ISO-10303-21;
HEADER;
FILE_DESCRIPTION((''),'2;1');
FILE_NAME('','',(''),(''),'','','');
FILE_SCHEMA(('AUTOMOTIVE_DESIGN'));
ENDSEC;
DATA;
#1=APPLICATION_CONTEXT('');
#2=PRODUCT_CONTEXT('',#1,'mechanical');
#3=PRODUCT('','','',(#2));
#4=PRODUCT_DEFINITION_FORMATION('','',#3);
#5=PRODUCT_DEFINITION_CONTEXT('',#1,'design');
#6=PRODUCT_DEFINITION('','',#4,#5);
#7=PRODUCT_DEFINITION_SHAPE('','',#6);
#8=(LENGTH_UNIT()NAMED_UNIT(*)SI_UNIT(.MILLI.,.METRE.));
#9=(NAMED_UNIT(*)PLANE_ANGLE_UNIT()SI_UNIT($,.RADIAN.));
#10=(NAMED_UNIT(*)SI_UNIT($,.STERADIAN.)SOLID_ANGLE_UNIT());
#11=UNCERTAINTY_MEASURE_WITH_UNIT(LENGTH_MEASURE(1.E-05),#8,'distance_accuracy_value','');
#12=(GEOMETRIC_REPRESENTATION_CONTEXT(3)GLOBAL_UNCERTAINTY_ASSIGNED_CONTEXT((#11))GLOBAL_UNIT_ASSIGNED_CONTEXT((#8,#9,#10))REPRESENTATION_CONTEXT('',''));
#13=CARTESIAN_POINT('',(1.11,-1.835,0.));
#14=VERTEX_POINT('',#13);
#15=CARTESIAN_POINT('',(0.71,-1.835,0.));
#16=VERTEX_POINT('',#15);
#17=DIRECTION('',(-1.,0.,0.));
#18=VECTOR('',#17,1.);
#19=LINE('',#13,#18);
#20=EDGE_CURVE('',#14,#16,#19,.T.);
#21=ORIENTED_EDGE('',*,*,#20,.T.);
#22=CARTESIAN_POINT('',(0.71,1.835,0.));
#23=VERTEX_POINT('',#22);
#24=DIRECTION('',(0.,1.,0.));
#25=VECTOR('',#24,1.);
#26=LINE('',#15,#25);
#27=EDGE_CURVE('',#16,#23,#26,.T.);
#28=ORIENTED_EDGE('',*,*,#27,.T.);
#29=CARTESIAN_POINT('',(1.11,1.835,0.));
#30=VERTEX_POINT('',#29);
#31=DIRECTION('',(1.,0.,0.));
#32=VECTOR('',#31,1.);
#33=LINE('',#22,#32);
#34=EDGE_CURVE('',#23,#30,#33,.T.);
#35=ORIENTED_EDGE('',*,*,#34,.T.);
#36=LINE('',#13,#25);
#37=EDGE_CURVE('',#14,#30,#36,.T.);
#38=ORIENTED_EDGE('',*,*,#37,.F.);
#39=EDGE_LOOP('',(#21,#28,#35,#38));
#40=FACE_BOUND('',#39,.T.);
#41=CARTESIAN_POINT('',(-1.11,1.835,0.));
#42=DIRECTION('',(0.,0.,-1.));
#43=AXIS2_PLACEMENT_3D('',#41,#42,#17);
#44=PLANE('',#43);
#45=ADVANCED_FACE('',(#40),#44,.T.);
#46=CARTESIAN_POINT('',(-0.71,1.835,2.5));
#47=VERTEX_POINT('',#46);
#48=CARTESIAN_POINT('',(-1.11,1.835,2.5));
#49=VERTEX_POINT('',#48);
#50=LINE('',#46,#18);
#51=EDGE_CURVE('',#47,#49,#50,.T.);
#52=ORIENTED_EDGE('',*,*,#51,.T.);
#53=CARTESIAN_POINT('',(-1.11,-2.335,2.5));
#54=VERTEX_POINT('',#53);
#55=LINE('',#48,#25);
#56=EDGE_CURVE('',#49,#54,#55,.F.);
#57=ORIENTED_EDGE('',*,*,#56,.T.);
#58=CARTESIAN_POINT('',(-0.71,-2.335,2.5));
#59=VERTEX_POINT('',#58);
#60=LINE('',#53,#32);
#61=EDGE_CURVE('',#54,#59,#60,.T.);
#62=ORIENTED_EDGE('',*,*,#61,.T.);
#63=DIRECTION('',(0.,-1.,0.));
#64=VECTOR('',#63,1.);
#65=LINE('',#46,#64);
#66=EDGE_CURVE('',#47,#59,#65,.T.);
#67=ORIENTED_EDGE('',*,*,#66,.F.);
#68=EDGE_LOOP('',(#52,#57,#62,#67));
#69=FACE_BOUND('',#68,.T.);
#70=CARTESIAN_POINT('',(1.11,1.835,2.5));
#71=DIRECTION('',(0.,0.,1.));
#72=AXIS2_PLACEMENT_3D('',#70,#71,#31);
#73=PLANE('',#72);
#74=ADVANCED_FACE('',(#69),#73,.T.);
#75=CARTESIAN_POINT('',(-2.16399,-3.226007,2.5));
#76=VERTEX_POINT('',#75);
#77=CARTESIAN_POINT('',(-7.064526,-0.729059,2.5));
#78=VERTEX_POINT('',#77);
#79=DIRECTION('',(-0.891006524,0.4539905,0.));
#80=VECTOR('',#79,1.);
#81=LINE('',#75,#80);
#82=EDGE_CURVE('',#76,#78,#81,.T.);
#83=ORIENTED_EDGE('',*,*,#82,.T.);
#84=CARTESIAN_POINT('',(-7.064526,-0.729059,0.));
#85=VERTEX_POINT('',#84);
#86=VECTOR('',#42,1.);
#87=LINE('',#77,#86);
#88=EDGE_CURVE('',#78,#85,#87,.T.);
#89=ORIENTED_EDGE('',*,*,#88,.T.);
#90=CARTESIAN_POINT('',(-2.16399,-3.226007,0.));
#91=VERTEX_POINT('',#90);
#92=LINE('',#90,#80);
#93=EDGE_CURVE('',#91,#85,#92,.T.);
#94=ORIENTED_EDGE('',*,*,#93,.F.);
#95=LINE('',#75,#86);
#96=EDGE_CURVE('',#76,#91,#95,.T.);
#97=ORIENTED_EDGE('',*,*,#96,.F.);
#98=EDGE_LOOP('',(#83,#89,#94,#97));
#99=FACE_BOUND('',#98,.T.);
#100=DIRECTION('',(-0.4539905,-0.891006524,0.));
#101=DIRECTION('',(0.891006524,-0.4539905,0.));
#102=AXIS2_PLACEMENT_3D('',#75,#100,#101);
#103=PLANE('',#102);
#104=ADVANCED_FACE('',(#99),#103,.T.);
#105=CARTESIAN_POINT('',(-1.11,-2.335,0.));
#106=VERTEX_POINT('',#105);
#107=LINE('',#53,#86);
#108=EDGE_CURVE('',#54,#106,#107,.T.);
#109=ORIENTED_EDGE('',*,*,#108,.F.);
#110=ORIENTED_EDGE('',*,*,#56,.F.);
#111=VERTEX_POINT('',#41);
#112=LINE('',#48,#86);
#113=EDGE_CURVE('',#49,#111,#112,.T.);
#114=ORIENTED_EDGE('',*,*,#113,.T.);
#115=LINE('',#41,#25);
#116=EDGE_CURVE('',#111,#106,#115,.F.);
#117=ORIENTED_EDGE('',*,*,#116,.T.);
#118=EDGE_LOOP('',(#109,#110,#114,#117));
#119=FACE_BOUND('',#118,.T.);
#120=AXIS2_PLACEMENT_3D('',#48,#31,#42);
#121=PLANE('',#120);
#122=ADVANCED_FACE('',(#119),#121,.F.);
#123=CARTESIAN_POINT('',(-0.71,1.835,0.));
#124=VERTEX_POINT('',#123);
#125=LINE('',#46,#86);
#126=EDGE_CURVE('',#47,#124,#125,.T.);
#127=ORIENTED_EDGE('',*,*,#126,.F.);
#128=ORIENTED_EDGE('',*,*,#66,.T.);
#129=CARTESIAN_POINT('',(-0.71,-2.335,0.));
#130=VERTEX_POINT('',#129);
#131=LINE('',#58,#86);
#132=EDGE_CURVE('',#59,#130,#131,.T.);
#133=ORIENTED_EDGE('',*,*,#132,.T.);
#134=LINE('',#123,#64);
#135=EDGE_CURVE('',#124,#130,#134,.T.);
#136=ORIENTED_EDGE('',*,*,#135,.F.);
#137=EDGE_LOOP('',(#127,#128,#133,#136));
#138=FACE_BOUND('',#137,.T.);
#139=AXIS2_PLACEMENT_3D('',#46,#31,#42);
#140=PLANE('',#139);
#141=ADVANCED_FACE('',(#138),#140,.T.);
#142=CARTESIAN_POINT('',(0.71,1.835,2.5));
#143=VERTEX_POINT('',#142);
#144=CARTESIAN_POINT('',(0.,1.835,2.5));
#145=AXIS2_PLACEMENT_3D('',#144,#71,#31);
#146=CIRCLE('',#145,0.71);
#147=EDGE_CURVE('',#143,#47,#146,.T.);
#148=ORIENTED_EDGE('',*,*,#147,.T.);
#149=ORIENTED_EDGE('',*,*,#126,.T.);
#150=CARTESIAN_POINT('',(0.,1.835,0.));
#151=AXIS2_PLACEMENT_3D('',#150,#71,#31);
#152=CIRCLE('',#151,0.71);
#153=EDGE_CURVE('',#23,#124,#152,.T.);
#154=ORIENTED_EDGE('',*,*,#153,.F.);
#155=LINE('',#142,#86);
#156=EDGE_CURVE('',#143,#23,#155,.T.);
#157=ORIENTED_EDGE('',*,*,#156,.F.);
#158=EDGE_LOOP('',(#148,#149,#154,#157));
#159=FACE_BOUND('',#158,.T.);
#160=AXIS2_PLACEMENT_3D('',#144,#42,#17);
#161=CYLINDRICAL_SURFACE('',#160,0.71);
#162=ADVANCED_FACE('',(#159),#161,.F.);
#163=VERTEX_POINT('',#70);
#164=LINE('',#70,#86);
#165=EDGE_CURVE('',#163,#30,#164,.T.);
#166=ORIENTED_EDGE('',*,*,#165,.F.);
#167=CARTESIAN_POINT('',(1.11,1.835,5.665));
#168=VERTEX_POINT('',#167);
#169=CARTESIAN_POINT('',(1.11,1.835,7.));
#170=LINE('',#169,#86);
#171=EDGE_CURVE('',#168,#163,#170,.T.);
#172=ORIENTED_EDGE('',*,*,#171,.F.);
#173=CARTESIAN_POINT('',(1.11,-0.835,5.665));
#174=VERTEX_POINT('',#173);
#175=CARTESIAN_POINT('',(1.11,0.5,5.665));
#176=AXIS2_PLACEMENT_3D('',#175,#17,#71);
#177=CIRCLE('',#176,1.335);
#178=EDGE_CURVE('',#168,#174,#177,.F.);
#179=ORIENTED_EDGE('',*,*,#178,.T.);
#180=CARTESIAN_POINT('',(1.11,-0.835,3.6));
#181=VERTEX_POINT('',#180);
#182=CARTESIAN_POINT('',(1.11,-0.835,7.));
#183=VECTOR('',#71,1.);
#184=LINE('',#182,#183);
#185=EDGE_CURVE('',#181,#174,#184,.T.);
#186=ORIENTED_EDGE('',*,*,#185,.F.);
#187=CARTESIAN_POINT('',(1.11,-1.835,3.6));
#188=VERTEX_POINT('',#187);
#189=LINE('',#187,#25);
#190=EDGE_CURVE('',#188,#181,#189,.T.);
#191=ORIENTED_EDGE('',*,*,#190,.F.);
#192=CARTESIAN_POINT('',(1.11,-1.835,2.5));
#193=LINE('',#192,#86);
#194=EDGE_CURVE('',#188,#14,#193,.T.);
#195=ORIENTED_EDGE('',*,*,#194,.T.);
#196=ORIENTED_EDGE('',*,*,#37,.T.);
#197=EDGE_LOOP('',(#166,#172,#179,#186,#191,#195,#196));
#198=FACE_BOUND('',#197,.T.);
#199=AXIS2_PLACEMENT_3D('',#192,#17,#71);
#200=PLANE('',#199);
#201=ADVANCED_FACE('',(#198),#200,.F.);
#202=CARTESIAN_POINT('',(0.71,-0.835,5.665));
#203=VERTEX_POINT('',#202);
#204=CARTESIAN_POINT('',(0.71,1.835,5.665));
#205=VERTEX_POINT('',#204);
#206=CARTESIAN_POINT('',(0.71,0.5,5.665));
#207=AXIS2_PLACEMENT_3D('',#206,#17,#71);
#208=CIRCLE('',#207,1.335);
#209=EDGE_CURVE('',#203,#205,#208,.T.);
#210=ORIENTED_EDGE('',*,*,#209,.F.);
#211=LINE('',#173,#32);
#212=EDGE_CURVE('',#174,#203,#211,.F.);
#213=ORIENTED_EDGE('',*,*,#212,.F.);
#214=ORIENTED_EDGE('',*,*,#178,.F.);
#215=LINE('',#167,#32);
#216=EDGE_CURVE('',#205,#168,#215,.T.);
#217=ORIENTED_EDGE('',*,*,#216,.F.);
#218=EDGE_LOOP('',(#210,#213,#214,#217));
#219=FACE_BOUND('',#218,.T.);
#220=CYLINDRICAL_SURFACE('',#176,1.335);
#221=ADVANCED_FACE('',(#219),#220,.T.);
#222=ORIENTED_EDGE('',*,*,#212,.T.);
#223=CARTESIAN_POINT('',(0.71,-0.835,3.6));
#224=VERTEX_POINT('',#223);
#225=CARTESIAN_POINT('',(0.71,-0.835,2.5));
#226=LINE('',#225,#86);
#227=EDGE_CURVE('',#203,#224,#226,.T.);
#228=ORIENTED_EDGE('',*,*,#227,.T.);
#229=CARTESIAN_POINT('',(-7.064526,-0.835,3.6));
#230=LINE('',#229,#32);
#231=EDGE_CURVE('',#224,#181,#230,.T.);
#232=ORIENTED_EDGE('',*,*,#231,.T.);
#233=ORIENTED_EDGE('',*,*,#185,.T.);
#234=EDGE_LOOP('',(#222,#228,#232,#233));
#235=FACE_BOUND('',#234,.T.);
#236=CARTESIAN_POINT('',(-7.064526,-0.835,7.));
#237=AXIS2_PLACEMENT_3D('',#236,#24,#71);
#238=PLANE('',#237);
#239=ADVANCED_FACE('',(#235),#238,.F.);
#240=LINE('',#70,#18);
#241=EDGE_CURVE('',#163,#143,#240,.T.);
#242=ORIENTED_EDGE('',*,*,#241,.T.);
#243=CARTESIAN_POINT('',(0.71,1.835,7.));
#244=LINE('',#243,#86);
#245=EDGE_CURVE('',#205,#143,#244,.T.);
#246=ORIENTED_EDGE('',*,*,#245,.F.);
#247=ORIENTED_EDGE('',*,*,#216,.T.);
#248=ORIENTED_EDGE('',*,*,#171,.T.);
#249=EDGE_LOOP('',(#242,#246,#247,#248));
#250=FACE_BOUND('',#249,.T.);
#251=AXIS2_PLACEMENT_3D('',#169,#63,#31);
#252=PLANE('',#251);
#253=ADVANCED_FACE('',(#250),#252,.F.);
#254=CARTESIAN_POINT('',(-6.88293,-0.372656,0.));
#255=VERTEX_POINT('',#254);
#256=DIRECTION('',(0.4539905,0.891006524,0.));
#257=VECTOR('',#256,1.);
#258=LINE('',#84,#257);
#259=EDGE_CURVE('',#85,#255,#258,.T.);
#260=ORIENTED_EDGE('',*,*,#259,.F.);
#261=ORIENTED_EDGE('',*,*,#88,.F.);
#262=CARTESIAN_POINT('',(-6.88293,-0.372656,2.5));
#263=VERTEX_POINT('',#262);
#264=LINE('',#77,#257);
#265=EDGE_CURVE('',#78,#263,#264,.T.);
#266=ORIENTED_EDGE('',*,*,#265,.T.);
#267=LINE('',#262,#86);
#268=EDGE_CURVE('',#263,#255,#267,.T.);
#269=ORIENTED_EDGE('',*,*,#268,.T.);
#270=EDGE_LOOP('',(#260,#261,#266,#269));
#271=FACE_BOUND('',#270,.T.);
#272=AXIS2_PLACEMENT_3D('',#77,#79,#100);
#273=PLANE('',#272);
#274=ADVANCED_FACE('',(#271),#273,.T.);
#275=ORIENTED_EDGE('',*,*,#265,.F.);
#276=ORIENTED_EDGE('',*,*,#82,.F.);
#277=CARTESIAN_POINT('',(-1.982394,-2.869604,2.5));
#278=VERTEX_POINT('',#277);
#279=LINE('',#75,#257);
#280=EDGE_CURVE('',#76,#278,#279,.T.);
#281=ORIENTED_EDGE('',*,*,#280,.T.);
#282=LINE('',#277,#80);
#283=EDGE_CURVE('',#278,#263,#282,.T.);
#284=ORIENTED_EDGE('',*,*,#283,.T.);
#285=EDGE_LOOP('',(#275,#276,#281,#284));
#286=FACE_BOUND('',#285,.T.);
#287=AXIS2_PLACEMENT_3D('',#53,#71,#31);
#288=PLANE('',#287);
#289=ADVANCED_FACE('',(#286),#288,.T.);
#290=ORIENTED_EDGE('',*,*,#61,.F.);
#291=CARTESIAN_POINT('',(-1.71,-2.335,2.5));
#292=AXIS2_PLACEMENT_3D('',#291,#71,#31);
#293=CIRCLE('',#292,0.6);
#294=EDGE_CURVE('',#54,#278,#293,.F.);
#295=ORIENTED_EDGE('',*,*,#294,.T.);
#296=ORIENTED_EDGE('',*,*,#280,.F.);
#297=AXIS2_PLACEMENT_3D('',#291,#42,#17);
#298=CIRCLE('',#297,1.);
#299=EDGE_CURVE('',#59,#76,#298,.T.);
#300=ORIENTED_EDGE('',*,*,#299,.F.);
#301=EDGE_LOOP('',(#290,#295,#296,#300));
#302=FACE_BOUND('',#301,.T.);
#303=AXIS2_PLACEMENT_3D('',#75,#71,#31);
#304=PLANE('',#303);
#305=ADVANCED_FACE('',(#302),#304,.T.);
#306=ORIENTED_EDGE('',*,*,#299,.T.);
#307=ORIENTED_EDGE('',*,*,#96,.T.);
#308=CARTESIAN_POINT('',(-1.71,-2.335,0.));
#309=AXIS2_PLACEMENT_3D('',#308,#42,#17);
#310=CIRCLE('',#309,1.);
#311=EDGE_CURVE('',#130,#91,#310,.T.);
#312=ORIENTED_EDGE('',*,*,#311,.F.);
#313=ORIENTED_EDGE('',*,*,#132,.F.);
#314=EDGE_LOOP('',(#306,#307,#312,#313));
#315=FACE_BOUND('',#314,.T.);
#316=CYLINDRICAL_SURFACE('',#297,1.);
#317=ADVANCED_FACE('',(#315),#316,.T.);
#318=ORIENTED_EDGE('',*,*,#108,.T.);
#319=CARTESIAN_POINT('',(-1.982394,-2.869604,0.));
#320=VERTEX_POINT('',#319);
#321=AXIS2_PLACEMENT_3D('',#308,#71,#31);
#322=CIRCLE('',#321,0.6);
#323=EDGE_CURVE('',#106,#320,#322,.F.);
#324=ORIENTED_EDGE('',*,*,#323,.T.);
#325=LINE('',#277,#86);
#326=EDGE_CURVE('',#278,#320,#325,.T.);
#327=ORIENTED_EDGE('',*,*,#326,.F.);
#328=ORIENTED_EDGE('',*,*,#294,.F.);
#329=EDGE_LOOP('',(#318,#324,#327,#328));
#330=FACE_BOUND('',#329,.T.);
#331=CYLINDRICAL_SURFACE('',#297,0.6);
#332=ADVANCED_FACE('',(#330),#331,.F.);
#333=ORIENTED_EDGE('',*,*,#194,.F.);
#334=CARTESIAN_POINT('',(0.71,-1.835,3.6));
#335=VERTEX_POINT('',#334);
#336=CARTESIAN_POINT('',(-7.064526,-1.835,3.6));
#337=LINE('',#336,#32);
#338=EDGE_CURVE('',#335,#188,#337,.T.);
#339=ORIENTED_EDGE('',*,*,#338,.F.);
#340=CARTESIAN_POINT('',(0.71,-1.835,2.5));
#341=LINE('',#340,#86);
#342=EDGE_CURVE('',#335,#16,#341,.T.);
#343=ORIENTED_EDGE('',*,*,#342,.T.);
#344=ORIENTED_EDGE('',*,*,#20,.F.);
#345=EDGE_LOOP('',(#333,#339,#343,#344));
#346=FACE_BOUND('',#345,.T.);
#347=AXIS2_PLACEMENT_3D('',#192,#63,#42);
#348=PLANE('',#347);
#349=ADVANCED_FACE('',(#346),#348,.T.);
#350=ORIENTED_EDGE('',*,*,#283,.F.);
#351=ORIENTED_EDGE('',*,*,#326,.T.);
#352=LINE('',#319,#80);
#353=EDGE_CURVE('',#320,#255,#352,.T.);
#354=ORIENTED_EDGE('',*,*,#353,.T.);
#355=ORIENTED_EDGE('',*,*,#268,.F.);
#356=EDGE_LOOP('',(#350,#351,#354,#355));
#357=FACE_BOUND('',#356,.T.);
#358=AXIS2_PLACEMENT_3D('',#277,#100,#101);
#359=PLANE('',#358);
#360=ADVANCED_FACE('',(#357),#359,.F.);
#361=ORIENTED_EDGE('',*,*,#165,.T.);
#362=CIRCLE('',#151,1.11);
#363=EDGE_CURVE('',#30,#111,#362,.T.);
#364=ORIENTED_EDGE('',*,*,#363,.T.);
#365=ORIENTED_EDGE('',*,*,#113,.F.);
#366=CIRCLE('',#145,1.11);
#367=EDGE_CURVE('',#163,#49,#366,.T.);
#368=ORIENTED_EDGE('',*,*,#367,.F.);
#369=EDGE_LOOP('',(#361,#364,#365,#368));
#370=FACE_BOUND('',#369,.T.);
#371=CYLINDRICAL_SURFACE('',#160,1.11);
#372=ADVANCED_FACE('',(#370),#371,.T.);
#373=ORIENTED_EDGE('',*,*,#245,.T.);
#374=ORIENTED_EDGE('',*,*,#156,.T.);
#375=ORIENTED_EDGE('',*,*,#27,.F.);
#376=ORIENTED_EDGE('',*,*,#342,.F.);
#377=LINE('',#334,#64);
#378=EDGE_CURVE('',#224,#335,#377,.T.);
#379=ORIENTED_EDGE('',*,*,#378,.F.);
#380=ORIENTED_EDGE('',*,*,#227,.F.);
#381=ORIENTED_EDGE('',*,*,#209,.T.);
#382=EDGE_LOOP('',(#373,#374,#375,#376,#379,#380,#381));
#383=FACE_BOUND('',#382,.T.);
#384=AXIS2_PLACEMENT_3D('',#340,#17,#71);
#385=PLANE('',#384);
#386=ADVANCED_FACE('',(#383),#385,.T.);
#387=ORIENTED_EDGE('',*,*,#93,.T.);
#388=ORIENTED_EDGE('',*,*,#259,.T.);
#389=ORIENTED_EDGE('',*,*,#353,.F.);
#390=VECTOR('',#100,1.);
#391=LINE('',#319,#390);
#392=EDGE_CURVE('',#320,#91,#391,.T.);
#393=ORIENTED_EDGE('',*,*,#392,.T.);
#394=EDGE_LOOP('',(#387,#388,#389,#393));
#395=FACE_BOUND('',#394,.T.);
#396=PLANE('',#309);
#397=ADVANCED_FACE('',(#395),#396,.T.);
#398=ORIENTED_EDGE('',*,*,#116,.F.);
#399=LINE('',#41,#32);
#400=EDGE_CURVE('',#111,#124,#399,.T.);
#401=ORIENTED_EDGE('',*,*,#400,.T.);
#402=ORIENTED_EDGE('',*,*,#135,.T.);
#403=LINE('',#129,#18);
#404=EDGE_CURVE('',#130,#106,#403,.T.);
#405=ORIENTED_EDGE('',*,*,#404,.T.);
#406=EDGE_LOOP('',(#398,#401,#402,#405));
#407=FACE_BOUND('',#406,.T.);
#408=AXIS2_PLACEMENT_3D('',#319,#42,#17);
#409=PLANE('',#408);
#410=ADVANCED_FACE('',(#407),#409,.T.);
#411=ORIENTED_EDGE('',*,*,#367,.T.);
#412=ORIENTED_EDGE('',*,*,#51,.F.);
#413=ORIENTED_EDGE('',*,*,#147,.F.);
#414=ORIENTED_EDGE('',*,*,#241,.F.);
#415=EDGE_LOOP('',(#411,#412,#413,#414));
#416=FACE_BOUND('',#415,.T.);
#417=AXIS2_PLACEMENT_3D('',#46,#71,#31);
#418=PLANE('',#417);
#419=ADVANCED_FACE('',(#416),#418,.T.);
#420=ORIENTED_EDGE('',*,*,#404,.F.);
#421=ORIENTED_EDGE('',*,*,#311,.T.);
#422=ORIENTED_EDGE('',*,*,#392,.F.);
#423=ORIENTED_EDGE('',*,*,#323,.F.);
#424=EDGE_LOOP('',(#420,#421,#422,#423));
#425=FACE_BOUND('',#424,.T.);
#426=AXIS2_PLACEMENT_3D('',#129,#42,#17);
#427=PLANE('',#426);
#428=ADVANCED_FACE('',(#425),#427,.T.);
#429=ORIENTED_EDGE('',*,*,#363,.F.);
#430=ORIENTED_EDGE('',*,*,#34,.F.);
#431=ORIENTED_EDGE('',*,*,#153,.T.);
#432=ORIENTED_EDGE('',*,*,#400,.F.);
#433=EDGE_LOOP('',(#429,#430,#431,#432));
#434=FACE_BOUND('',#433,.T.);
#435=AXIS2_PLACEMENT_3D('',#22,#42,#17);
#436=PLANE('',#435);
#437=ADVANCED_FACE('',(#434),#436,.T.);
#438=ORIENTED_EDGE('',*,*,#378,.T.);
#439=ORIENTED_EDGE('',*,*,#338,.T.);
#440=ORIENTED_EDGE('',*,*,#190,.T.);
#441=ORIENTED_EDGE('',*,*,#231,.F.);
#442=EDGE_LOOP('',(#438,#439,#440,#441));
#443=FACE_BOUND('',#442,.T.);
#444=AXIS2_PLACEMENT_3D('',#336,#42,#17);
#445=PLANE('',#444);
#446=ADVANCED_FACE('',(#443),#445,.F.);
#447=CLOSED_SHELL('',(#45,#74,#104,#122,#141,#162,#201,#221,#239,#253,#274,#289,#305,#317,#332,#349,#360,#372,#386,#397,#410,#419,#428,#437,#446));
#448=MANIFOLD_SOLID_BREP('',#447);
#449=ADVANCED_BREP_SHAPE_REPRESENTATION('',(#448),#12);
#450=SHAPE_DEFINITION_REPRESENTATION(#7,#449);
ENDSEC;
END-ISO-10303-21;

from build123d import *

# Parameters (mm, degrees)
BASE_FLANGE1_DEPTH  = 2.5
SKETCH6_W           = 0.4
SKETCH6_H           = 3.67
BOSS_EXTRUDE1_DEPTH = 4.5
SKETCH7_W           = 3.4
SKETCH7_H           = 1
CUT_EXTRUDE1_DEPTH  = 12.266991905
FILLET1_RADIUS      = 1.335
FILLET1_LENGTH      = 0.4


# Sheet-metal steps are written as plain solids
with BuildPart() as part:
    # Sketch1 → Base-Flange1 (new body)
    with BuildSketch(Plane.XY):
        with BuildLine():
            Line((0.71, -1.835), (0.71, 1.835))
            ThreePointArc((0.71, 1.835), (0, 2.545), (-0.71, 1.835))
            Line((-0.71, 1.835), (-0.71, -2.335))
            ThreePointArc((-0.71, -2.335), (-1.187501435, -3.187640164), (-2.1639905, -3.226006524))
            Line((-2.1639905, -3.226006524), (-7.064526383, -0.729058776))
            Line((-7.064526383, -0.729058776), (-6.882930183, -0.372656166))
            Line((-6.882930183, -0.372656166), (-1.9823943, -2.869603915))
            ThreePointArc((-1.9823943, -2.869603915), (-1.396500861, -2.846584099), (-1.11, -2.335))
            Line((-1.11, -2.335), (-1.11, 1.835))
            ThreePointArc((-1.11, 1.835), (0, 2.945), (1.11, 1.835))
            Line((1.11, 1.835), (1.11, -1.835))
            Line((1.11, -1.835), (0.71, -1.835))
        make_face()
    extrude(amount=BASE_FLANGE1_DEPTH)

    # Sketch6 → Boss-Extrude1 (add)
    with BuildSketch(Plane.XY.offset(2.5)):
        with Locations((0.91, 0)):
            Rectangle(SKETCH6_W, SKETCH6_H)
    extrude(amount=BOSS_EXTRUDE1_DEPTH)

    # Sketch7 → Cut-Extrude1 (cut, through all)
    with BuildSketch(Plane(origin=(1.11, 0, 0), x_dir=(0, 0, -1), z_dir=(1, 0, 0))):
        with Locations((-5.3, -1.335)):
            Rectangle(SKETCH7_W, SKETCH7_H)
    extrude(amount=-CUT_EXTRUDE1_DEPTH, mode=Mode.SUBTRACT)

    # Fillet1: full round fillet: the end face becomes a half cylinder, R = half its width
    fillet1_face = Plane((0.91, 0.5, 7), x_dir=(-1, 0, 0), z_dir=(0, 0, 1))  # on the end face: x along it, z out of the body
    fillet1_slab = fillet1_face.offset(-FILLET1_RADIUS / 2) * Box(FILLET1_LENGTH, 2 * FILLET1_RADIUS, FILLET1_RADIUS, mode=Mode.PRIVATE)  # the body's end, R deep
    fillet1_round = Plane((0.91, 0.5, 5.665), x_dir=(0, 0, 1), z_dir=(-1, 0, 0)) * Cylinder(FILLET1_RADIUS, FILLET1_LENGTH, mode=Mode.PRIVATE)  # its axis R under the face
    add(fillet1_slab - fillet1_round, mode=Mode.SUBTRACT)


solid = part.part
